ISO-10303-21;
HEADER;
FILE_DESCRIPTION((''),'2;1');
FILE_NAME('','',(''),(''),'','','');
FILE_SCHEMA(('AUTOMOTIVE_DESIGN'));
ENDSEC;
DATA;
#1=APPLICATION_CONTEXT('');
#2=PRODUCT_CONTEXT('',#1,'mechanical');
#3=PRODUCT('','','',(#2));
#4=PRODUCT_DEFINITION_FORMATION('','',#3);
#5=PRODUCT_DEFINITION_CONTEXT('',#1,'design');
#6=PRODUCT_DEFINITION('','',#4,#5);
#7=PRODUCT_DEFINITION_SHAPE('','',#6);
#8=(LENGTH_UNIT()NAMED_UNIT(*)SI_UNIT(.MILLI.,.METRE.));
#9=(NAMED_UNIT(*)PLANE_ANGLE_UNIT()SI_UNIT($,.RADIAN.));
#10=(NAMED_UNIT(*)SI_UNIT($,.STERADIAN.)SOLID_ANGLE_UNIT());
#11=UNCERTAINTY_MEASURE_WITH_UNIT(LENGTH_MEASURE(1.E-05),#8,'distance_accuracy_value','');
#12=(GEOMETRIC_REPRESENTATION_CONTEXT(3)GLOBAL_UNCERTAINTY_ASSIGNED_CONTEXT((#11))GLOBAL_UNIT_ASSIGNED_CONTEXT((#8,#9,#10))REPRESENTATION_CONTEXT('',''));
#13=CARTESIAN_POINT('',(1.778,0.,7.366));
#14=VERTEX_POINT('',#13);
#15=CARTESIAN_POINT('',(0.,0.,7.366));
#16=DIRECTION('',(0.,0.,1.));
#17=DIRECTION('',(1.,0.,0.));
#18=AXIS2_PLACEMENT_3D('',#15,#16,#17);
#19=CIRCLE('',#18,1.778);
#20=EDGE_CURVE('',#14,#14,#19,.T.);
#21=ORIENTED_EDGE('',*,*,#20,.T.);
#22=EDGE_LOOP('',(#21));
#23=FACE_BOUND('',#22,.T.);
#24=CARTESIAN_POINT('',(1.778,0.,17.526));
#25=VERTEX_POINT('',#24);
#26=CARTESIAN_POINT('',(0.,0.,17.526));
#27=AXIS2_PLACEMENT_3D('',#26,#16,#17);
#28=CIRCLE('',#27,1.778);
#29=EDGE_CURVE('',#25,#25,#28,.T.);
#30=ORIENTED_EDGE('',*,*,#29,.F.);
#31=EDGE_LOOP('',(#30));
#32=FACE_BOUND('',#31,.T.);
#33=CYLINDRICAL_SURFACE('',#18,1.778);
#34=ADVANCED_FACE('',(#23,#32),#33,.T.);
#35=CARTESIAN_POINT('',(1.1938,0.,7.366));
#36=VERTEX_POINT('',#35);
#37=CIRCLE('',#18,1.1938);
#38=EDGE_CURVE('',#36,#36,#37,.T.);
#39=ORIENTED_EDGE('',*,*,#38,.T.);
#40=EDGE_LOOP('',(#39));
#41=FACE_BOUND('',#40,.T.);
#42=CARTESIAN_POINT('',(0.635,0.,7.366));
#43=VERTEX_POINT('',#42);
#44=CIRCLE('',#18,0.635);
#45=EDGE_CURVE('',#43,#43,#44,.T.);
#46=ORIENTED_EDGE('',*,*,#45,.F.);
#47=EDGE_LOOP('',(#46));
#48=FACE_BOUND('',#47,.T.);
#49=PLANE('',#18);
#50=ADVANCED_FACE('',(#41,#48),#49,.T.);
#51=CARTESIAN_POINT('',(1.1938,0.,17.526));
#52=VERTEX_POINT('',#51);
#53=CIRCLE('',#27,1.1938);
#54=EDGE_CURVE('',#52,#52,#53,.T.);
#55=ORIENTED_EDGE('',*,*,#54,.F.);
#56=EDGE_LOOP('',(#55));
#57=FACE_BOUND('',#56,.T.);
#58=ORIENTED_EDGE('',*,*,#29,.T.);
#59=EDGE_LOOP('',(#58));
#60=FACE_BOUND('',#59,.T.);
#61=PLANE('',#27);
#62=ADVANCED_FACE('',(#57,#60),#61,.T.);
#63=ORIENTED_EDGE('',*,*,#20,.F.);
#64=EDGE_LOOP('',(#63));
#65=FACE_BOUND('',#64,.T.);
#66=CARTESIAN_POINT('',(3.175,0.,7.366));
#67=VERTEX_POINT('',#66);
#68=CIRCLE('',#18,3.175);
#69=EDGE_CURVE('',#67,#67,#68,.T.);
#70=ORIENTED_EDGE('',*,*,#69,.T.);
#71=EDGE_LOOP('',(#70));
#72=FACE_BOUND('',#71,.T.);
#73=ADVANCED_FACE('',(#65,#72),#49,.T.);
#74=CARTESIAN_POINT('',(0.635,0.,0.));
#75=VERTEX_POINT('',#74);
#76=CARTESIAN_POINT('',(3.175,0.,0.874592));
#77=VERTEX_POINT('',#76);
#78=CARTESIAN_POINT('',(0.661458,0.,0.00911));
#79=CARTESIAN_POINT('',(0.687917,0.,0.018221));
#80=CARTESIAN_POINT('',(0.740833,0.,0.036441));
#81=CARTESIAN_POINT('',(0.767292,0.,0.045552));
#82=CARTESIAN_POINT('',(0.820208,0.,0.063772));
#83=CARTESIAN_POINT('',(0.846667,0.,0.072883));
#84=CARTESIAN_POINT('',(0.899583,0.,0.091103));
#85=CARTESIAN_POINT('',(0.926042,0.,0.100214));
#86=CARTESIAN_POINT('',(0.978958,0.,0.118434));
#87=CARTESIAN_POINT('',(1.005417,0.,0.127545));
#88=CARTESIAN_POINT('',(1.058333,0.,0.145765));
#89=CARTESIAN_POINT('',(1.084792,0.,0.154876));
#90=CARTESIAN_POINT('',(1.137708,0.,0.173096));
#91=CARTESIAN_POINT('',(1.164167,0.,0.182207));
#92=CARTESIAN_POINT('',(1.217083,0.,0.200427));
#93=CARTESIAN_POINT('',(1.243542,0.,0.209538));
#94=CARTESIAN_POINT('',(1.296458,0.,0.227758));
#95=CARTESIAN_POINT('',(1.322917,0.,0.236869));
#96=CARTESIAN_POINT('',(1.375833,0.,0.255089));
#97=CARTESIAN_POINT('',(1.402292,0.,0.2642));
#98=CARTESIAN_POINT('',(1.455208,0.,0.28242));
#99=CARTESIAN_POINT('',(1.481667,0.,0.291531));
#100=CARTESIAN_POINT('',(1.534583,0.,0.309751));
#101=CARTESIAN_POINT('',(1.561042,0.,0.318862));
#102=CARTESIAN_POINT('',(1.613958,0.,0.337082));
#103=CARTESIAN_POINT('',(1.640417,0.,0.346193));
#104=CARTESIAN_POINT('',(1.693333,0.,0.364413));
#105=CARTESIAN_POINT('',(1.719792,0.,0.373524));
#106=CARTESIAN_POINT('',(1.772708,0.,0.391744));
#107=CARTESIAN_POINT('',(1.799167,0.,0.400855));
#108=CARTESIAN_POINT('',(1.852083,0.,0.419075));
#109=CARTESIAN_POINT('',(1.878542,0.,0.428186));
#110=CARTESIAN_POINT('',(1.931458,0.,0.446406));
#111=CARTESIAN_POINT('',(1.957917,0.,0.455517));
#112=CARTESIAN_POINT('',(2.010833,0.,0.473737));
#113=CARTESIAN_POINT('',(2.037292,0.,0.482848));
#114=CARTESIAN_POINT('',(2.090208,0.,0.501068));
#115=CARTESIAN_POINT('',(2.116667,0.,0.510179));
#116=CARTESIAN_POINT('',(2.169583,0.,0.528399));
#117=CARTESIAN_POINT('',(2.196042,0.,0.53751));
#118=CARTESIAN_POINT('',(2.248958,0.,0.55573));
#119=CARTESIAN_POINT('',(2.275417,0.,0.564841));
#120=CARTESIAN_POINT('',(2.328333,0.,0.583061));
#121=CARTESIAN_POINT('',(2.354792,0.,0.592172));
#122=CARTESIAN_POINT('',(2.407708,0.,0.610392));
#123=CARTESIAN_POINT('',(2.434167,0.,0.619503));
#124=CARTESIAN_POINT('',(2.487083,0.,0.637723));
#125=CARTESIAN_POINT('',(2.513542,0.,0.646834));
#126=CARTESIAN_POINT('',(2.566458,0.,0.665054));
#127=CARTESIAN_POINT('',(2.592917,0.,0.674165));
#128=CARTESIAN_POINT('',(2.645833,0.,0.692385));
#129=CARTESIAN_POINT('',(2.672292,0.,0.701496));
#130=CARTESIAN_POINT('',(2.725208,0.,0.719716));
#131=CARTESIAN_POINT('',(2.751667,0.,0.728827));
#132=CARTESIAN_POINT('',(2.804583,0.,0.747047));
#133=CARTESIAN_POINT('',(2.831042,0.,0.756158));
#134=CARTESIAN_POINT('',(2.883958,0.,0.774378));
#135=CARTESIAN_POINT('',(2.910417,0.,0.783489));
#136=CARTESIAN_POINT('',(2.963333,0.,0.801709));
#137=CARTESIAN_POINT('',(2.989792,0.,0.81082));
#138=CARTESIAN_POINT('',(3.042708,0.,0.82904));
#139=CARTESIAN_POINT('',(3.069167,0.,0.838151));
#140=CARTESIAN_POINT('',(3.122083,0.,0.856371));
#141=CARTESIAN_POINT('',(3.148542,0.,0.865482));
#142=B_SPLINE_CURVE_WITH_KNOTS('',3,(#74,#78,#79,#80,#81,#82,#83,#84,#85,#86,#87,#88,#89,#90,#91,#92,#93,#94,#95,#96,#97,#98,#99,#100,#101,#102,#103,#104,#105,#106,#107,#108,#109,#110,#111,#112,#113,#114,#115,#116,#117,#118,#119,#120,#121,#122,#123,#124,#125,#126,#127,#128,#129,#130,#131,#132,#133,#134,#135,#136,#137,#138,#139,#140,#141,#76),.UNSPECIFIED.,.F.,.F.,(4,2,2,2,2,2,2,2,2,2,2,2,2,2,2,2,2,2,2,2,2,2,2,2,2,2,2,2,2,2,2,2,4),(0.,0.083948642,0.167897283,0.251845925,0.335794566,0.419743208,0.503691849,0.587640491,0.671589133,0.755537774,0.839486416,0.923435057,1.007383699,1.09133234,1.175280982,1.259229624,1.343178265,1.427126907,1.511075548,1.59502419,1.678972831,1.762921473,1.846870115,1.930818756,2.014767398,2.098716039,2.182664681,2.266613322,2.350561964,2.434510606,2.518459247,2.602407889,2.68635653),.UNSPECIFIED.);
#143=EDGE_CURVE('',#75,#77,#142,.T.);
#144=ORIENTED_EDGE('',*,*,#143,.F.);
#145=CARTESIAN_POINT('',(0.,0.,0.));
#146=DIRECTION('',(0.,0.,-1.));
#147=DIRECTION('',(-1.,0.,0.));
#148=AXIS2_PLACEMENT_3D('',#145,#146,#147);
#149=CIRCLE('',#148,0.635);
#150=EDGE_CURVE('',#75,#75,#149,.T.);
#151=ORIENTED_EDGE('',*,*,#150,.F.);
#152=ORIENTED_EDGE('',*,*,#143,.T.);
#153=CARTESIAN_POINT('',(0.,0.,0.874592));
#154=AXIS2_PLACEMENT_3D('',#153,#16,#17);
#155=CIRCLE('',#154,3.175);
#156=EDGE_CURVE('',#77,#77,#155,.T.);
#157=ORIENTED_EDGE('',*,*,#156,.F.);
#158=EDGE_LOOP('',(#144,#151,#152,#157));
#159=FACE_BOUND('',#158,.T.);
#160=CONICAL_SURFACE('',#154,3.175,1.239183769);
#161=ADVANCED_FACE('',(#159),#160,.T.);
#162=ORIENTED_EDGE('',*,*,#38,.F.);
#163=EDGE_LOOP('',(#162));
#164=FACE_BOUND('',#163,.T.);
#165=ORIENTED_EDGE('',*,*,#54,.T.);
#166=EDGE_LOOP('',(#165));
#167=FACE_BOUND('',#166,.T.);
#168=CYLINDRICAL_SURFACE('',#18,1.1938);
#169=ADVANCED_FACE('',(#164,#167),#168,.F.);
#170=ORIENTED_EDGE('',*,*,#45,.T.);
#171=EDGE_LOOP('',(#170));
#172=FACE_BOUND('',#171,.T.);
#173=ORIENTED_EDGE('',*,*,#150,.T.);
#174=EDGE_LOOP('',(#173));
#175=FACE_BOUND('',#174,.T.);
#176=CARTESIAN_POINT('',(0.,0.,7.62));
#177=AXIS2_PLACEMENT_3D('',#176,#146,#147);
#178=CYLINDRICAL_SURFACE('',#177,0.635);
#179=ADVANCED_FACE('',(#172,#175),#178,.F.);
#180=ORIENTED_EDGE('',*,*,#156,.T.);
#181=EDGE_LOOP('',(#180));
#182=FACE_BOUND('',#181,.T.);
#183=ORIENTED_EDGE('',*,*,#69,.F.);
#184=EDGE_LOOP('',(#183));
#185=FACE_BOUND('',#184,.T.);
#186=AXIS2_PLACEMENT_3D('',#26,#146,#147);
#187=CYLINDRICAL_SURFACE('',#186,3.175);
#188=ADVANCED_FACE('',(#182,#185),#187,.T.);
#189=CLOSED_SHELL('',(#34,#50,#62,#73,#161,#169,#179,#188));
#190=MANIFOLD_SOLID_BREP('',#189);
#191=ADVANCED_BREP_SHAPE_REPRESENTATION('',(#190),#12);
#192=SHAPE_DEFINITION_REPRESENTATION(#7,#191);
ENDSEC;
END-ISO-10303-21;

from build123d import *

# Parameters (mm, degrees)
SKETCH1_R           = 3.175
BOSS_EXTRUDE1_DEPTH = 17.526
SKETCH2_OUTSIDE_W   = 12.288
SKETCH2_OUTSIDE_H   = 12.288
SKETCH2_OUTSIDE_R   = 1.778
CUT_EXTRUDE1_DEPTH  = 10.16
SKETCH3_R           = 1.1938
CUT_EXTRUDE2_DEPTH  = 10.16
SKETCH5_R           = 0.635
CUT_EXTRUDE3_DEPTH  = 7.62
CHAMFER1_SIZE       = 0.874592138
CHAMFER1_SIZE_2     = 2.54


with BuildPart() as part:
    # Sketch1 → Boss-Extrude1 (new body)
    with BuildSketch(Plane.XY):
        Circle(SKETCH1_R)
    extrude(amount=BOSS_EXTRUDE1_DEPTH)

    # Sketch2 outside → Cut-Extrude1 (cut)
    with BuildSketch(Plane.XY.offset(17.526)):
        Rectangle(SKETCH2_OUTSIDE_W, SKETCH2_OUTSIDE_H)
        Circle(SKETCH2_OUTSIDE_R, mode=Mode.SUBTRACT)
    extrude(amount=-CUT_EXTRUDE1_DEPTH, mode=Mode.SUBTRACT)

    # Sketch3 → Cut-Extrude2 (cut)
    with BuildSketch(Plane.XY.offset(17.526)):
        Circle(SKETCH3_R)
    extrude(amount=-CUT_EXTRUDE2_DEPTH, mode=Mode.SUBTRACT)

    # Sketch5 → Cut-Extrude3 (cut)
    with BuildSketch(Plane(origin=(0, 0, 0), x_dir=(-1, 0, 0), z_dir=(0, 0, -1))):
        Circle(SKETCH5_R)
    extrude(amount=-CUT_EXTRUDE3_DEPTH, mode=Mode.SUBTRACT)

    # Chamfer1
    # the kernel refuses this chamfer: 2.54, 0.874592138 mm, written as the material it takes off along each edge
    with BuildSketch(Plane(origin=(0, 0, 0), x_dir=(1, 0, 0), z_dir=(0, -1, 0))) as chamfer1_piece_1:
        Polygon((3.175, CHAMFER1_SIZE), (3.175 - CHAMFER1_SIZE_2, 0), (3.175, 0), align=None)
    revolve(axis=Axis((0, 0, 0), (0, 0, 1)), mode=Mode.SUBTRACT)


solid = part.part
